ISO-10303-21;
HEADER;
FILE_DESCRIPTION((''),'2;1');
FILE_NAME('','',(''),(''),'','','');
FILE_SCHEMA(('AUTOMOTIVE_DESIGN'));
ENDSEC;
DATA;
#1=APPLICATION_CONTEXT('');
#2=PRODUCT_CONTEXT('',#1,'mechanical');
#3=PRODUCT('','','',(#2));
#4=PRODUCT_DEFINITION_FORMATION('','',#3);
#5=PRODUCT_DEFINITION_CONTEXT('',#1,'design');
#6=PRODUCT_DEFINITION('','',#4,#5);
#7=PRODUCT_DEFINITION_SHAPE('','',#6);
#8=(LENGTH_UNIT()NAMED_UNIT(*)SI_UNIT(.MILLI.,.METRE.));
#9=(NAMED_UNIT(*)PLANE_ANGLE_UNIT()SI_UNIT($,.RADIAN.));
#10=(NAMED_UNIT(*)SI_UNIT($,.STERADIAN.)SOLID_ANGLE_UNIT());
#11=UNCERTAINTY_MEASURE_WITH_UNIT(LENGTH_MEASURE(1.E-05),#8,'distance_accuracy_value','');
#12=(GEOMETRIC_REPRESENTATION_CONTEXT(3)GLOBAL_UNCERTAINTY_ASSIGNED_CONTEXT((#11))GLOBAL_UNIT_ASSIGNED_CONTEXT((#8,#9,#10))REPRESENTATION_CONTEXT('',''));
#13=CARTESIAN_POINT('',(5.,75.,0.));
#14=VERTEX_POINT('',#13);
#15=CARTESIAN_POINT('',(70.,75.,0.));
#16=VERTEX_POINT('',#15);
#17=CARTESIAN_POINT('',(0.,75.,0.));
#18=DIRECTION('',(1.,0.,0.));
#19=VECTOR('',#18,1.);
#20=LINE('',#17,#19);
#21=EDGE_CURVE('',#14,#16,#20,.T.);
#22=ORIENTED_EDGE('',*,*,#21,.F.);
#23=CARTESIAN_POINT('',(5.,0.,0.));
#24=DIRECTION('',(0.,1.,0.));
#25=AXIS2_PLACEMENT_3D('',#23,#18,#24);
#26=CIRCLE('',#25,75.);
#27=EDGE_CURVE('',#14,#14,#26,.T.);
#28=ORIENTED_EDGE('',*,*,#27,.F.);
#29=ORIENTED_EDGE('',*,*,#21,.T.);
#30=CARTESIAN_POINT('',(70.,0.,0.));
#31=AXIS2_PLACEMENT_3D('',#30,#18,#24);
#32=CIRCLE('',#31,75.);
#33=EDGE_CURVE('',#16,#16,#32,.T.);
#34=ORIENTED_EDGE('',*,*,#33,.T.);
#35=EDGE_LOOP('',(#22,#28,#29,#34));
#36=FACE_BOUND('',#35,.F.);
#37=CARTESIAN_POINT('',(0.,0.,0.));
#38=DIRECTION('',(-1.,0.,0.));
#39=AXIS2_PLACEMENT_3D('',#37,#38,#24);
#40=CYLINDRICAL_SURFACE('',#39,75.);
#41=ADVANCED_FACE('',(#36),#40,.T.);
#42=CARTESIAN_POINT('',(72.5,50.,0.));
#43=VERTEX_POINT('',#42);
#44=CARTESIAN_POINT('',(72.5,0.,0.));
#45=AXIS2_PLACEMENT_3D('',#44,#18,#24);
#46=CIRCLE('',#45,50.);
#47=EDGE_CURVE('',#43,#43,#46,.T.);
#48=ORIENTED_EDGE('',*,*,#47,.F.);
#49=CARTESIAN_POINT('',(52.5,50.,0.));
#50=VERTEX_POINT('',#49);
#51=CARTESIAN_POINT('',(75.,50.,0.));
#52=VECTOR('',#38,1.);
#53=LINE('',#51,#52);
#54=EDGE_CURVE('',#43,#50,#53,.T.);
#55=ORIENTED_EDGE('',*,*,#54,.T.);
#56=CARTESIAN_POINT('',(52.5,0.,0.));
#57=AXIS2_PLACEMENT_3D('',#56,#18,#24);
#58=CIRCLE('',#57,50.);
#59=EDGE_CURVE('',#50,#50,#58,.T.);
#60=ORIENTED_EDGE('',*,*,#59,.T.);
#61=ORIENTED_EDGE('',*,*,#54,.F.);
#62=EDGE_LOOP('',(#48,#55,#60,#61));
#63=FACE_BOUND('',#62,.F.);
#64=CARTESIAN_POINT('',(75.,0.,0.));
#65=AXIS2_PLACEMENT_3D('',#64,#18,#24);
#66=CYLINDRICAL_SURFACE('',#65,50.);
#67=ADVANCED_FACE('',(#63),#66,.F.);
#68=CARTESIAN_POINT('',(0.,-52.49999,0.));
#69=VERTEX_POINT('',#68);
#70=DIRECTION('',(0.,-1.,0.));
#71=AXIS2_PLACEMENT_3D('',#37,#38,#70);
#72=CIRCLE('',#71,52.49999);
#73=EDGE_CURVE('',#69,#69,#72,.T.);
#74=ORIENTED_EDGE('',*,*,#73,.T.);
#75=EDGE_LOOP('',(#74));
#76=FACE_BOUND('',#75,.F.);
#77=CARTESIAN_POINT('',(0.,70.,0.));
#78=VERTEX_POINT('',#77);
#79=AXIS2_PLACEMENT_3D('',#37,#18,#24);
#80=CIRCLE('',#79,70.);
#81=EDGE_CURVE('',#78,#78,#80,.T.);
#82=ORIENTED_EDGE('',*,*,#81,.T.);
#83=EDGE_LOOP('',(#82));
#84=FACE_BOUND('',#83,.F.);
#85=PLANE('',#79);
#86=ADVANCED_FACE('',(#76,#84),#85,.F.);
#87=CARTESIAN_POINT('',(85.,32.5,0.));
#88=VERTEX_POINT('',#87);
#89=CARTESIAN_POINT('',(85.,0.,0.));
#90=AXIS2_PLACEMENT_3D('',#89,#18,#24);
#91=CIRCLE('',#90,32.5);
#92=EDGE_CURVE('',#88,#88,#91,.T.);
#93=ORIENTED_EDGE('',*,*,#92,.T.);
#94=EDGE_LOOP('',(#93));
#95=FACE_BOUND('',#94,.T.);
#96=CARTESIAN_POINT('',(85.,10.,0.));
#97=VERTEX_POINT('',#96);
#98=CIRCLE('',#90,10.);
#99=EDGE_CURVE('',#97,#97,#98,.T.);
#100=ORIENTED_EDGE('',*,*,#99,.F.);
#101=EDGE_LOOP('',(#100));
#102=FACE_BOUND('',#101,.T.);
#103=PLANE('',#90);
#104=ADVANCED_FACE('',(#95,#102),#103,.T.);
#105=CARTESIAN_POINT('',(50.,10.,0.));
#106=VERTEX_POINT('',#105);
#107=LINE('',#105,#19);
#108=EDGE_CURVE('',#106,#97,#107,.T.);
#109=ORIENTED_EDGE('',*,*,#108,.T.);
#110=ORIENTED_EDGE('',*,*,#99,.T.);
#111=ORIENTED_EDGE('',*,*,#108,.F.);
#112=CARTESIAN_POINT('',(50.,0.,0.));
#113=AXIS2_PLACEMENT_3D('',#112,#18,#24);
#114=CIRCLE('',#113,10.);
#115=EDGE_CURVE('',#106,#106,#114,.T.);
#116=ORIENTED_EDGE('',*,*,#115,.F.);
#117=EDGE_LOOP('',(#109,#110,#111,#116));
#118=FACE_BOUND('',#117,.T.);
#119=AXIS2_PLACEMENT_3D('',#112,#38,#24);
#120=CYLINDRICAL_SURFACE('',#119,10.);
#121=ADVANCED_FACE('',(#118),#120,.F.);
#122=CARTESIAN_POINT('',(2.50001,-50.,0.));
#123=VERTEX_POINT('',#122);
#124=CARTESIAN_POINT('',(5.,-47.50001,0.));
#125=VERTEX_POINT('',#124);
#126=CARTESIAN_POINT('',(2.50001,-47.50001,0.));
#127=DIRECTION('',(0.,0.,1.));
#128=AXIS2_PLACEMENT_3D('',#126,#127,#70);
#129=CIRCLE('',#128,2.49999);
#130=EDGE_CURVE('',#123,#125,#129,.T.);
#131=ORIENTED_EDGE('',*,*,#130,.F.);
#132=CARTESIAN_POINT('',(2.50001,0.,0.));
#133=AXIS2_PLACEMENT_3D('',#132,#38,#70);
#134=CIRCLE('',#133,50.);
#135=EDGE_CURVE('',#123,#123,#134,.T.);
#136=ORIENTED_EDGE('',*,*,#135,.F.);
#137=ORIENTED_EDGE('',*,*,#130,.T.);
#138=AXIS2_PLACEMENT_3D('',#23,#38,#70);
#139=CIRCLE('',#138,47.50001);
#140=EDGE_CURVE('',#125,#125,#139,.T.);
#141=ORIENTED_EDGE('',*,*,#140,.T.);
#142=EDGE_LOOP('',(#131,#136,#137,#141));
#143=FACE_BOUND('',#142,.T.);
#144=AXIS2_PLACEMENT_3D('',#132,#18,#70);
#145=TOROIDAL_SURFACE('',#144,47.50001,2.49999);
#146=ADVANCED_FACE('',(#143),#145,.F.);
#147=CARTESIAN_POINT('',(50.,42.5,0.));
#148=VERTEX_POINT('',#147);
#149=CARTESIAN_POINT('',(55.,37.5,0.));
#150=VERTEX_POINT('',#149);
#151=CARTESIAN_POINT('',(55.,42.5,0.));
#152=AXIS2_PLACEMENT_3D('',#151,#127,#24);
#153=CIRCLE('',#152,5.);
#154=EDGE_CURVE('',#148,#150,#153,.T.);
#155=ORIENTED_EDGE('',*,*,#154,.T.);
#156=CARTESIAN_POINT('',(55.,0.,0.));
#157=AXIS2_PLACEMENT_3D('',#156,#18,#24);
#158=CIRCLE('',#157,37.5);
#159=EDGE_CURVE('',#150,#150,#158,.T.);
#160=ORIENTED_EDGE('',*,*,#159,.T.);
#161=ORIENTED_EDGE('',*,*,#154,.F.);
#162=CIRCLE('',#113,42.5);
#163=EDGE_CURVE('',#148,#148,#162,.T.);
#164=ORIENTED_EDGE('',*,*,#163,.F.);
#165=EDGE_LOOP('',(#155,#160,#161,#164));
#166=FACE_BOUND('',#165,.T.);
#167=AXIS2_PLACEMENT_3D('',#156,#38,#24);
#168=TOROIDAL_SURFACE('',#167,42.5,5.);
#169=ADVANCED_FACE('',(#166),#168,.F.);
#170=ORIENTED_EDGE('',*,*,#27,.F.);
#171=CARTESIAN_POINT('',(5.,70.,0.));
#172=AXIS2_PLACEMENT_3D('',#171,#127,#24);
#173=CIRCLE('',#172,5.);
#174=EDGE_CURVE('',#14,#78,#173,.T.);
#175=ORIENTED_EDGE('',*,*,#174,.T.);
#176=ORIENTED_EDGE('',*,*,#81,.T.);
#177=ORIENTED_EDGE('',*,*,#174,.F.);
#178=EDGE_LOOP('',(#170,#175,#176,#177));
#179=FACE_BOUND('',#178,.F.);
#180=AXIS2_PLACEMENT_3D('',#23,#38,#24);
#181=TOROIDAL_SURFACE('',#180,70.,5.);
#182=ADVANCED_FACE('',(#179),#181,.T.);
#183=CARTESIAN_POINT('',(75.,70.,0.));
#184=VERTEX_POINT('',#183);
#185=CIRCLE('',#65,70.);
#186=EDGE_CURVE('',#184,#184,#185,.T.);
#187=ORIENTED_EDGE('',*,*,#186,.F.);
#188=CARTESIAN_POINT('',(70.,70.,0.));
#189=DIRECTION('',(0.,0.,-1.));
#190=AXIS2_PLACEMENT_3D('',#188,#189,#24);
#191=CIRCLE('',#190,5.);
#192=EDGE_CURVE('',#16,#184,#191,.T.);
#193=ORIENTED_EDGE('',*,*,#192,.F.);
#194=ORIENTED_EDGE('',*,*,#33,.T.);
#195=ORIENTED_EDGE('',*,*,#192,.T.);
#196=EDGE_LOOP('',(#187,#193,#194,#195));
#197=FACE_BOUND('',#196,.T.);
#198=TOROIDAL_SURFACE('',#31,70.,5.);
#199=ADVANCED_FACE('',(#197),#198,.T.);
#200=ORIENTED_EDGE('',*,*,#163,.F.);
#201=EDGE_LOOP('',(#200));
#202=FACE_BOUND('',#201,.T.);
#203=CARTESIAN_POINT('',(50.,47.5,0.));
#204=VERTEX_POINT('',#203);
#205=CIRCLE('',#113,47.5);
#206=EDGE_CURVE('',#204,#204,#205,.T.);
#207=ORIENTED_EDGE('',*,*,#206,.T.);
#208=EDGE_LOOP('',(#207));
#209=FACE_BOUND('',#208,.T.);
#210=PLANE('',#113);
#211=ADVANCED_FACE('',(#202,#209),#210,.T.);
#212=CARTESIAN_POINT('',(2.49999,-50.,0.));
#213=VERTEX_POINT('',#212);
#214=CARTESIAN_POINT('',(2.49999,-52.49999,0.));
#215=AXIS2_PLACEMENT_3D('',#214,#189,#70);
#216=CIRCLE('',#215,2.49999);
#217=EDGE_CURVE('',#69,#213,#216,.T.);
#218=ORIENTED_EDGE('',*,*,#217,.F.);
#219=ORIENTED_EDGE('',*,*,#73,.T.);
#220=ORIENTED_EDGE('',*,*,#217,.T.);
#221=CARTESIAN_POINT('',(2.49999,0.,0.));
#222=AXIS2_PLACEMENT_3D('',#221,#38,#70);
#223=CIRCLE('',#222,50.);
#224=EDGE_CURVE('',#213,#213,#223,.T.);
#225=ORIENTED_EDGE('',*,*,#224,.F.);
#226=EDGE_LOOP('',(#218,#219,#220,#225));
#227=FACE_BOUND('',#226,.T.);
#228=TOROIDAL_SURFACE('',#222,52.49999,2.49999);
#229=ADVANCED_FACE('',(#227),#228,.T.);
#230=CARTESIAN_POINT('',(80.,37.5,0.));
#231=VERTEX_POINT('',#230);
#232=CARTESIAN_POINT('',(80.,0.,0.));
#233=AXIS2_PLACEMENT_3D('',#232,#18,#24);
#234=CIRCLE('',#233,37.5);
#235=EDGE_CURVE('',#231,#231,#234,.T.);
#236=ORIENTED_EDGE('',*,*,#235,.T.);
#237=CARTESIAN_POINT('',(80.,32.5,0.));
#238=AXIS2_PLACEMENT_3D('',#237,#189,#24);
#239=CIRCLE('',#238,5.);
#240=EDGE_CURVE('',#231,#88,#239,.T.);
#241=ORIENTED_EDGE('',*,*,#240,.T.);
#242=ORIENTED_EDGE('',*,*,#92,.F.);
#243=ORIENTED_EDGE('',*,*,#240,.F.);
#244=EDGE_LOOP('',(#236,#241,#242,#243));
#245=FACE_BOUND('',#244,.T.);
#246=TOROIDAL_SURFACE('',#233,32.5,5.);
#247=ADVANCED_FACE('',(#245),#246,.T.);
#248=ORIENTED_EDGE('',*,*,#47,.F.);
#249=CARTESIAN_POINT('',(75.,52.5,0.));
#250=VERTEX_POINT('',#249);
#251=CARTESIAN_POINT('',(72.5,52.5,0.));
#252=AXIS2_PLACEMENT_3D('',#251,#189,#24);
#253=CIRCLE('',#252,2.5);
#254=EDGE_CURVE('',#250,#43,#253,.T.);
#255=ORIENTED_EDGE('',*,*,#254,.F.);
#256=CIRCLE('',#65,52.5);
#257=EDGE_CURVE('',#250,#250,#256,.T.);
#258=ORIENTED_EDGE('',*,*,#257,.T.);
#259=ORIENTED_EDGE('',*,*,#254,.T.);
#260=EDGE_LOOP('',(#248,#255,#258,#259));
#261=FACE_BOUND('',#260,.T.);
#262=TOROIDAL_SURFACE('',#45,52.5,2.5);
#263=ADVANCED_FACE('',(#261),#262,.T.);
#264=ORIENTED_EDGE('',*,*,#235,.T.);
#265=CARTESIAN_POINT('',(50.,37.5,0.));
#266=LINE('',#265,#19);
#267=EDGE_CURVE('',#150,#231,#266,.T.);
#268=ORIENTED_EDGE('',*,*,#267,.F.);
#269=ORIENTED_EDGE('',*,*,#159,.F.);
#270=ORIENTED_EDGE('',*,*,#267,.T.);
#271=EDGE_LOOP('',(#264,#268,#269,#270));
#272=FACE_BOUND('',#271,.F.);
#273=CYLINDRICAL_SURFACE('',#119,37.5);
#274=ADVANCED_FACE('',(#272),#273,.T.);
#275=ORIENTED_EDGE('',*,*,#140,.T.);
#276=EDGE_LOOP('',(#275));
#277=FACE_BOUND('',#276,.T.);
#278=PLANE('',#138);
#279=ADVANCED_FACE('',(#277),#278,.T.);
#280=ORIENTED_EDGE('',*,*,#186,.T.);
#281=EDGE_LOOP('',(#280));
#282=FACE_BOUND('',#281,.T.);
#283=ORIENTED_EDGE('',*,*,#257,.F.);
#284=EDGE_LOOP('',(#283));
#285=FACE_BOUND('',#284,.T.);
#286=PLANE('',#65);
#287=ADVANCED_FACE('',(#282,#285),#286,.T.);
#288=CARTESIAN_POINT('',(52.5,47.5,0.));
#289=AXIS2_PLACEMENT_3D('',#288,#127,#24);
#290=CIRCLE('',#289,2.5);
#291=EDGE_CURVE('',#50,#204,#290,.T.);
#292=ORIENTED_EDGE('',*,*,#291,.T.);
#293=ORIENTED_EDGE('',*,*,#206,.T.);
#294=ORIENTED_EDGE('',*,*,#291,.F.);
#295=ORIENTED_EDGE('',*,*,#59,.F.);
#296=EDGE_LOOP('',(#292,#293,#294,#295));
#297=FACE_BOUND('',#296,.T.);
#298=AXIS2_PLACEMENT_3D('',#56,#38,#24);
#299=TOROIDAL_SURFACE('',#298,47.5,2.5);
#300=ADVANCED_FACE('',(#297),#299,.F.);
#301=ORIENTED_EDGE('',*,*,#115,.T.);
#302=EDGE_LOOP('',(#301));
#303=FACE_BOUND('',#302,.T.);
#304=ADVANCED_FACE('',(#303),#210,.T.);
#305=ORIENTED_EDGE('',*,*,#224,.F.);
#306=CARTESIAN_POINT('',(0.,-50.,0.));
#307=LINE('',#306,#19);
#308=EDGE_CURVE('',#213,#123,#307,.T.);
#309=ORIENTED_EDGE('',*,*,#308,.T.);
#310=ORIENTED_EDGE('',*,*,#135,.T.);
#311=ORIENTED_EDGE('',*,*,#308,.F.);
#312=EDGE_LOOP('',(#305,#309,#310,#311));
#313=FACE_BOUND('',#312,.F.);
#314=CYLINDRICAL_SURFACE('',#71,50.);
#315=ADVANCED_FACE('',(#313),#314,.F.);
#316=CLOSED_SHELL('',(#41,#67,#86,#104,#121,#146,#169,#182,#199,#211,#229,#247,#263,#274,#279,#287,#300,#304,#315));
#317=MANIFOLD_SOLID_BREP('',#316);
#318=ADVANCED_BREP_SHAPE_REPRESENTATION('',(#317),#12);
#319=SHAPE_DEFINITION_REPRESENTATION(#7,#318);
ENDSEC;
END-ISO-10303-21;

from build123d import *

# Parameters (mm, degrees)
F0_R      = 75
F1_DEPTH  = 75
F2_R      = 5
F3_R      = 50
F4_DEPTH  = 5
F5_R      = 2.49999
F6_R      = 50
F7_DEPTH  = 25
F8_R      = 2.5
F9_R      = 37.5
F9_R_2    = 10
F10_DEPTH = 35
F11_R     = 5


# Not quite as in the source:
# - a fillet or chamfer is up to 0.001 mm smaller than in the source, because OpenCascade refuses the exact size


with BuildPart() as f1:
    # F0 (on Right) → F1 (new body)
    with BuildSketch(Plane.YZ):
        Circle(F0_R)
    extrude(amount=F1_DEPTH)

    # F2
    f2_edges = [f1.edges().sort_by_distance(p)[0] for p in [
        (37.5, 75, 0),
        (0, -75, 0),
        (75, -75, 0),
    ]]
    fillet(f2_edges, radius=F2_R)

    # F3 (on face) → F4 (cut)
    with BuildSketch(Plane(origin=(0, 0, 0), x_dir=(0, -1, 0), z_dir=(-1, 0, 0))):
        Circle(F3_R)
    extrude(amount=-F4_DEPTH, mode=Mode.SUBTRACT)

    # F5 (radius 2.5 in the source; OpenCascade refuses exactly that, so slightly less here)
    f5_edges = [f1.edges().sort_by_distance(p)[0] for p in [
        (5, 50, 0),
        (0, 50, 0),
    ]]
    fillet(f5_edges, radius=F5_R)

    # F6 (on face) → F7 (cut)
    with BuildSketch(Plane.YZ.offset(75)):
        Circle(F6_R)
    extrude(amount=-F7_DEPTH, mode=Mode.SUBTRACT)

    # F8
    f8_edges = [f1.edges().sort_by_distance(p)[0] for p in [
        (50, -50, 0),
        (75, -50, 0),
    ]]
    fillet(f8_edges, radius=F8_R)

    # F9 (on face) → F10 (join)
    with BuildSketch(Plane.YZ.offset(50)):
        Circle(F9_R)
        Circle(F9_R_2, mode=Mode.SUBTRACT)
    extrude(amount=F10_DEPTH)

    # F11
    f11_edges = [f1.edges().sort_by_distance(p)[0] for p in [
        (50, -37.5, 0),
        (85, -37.5, 0),
    ]]
    fillet(f11_edges, radius=F11_R)


solid = f1.part
